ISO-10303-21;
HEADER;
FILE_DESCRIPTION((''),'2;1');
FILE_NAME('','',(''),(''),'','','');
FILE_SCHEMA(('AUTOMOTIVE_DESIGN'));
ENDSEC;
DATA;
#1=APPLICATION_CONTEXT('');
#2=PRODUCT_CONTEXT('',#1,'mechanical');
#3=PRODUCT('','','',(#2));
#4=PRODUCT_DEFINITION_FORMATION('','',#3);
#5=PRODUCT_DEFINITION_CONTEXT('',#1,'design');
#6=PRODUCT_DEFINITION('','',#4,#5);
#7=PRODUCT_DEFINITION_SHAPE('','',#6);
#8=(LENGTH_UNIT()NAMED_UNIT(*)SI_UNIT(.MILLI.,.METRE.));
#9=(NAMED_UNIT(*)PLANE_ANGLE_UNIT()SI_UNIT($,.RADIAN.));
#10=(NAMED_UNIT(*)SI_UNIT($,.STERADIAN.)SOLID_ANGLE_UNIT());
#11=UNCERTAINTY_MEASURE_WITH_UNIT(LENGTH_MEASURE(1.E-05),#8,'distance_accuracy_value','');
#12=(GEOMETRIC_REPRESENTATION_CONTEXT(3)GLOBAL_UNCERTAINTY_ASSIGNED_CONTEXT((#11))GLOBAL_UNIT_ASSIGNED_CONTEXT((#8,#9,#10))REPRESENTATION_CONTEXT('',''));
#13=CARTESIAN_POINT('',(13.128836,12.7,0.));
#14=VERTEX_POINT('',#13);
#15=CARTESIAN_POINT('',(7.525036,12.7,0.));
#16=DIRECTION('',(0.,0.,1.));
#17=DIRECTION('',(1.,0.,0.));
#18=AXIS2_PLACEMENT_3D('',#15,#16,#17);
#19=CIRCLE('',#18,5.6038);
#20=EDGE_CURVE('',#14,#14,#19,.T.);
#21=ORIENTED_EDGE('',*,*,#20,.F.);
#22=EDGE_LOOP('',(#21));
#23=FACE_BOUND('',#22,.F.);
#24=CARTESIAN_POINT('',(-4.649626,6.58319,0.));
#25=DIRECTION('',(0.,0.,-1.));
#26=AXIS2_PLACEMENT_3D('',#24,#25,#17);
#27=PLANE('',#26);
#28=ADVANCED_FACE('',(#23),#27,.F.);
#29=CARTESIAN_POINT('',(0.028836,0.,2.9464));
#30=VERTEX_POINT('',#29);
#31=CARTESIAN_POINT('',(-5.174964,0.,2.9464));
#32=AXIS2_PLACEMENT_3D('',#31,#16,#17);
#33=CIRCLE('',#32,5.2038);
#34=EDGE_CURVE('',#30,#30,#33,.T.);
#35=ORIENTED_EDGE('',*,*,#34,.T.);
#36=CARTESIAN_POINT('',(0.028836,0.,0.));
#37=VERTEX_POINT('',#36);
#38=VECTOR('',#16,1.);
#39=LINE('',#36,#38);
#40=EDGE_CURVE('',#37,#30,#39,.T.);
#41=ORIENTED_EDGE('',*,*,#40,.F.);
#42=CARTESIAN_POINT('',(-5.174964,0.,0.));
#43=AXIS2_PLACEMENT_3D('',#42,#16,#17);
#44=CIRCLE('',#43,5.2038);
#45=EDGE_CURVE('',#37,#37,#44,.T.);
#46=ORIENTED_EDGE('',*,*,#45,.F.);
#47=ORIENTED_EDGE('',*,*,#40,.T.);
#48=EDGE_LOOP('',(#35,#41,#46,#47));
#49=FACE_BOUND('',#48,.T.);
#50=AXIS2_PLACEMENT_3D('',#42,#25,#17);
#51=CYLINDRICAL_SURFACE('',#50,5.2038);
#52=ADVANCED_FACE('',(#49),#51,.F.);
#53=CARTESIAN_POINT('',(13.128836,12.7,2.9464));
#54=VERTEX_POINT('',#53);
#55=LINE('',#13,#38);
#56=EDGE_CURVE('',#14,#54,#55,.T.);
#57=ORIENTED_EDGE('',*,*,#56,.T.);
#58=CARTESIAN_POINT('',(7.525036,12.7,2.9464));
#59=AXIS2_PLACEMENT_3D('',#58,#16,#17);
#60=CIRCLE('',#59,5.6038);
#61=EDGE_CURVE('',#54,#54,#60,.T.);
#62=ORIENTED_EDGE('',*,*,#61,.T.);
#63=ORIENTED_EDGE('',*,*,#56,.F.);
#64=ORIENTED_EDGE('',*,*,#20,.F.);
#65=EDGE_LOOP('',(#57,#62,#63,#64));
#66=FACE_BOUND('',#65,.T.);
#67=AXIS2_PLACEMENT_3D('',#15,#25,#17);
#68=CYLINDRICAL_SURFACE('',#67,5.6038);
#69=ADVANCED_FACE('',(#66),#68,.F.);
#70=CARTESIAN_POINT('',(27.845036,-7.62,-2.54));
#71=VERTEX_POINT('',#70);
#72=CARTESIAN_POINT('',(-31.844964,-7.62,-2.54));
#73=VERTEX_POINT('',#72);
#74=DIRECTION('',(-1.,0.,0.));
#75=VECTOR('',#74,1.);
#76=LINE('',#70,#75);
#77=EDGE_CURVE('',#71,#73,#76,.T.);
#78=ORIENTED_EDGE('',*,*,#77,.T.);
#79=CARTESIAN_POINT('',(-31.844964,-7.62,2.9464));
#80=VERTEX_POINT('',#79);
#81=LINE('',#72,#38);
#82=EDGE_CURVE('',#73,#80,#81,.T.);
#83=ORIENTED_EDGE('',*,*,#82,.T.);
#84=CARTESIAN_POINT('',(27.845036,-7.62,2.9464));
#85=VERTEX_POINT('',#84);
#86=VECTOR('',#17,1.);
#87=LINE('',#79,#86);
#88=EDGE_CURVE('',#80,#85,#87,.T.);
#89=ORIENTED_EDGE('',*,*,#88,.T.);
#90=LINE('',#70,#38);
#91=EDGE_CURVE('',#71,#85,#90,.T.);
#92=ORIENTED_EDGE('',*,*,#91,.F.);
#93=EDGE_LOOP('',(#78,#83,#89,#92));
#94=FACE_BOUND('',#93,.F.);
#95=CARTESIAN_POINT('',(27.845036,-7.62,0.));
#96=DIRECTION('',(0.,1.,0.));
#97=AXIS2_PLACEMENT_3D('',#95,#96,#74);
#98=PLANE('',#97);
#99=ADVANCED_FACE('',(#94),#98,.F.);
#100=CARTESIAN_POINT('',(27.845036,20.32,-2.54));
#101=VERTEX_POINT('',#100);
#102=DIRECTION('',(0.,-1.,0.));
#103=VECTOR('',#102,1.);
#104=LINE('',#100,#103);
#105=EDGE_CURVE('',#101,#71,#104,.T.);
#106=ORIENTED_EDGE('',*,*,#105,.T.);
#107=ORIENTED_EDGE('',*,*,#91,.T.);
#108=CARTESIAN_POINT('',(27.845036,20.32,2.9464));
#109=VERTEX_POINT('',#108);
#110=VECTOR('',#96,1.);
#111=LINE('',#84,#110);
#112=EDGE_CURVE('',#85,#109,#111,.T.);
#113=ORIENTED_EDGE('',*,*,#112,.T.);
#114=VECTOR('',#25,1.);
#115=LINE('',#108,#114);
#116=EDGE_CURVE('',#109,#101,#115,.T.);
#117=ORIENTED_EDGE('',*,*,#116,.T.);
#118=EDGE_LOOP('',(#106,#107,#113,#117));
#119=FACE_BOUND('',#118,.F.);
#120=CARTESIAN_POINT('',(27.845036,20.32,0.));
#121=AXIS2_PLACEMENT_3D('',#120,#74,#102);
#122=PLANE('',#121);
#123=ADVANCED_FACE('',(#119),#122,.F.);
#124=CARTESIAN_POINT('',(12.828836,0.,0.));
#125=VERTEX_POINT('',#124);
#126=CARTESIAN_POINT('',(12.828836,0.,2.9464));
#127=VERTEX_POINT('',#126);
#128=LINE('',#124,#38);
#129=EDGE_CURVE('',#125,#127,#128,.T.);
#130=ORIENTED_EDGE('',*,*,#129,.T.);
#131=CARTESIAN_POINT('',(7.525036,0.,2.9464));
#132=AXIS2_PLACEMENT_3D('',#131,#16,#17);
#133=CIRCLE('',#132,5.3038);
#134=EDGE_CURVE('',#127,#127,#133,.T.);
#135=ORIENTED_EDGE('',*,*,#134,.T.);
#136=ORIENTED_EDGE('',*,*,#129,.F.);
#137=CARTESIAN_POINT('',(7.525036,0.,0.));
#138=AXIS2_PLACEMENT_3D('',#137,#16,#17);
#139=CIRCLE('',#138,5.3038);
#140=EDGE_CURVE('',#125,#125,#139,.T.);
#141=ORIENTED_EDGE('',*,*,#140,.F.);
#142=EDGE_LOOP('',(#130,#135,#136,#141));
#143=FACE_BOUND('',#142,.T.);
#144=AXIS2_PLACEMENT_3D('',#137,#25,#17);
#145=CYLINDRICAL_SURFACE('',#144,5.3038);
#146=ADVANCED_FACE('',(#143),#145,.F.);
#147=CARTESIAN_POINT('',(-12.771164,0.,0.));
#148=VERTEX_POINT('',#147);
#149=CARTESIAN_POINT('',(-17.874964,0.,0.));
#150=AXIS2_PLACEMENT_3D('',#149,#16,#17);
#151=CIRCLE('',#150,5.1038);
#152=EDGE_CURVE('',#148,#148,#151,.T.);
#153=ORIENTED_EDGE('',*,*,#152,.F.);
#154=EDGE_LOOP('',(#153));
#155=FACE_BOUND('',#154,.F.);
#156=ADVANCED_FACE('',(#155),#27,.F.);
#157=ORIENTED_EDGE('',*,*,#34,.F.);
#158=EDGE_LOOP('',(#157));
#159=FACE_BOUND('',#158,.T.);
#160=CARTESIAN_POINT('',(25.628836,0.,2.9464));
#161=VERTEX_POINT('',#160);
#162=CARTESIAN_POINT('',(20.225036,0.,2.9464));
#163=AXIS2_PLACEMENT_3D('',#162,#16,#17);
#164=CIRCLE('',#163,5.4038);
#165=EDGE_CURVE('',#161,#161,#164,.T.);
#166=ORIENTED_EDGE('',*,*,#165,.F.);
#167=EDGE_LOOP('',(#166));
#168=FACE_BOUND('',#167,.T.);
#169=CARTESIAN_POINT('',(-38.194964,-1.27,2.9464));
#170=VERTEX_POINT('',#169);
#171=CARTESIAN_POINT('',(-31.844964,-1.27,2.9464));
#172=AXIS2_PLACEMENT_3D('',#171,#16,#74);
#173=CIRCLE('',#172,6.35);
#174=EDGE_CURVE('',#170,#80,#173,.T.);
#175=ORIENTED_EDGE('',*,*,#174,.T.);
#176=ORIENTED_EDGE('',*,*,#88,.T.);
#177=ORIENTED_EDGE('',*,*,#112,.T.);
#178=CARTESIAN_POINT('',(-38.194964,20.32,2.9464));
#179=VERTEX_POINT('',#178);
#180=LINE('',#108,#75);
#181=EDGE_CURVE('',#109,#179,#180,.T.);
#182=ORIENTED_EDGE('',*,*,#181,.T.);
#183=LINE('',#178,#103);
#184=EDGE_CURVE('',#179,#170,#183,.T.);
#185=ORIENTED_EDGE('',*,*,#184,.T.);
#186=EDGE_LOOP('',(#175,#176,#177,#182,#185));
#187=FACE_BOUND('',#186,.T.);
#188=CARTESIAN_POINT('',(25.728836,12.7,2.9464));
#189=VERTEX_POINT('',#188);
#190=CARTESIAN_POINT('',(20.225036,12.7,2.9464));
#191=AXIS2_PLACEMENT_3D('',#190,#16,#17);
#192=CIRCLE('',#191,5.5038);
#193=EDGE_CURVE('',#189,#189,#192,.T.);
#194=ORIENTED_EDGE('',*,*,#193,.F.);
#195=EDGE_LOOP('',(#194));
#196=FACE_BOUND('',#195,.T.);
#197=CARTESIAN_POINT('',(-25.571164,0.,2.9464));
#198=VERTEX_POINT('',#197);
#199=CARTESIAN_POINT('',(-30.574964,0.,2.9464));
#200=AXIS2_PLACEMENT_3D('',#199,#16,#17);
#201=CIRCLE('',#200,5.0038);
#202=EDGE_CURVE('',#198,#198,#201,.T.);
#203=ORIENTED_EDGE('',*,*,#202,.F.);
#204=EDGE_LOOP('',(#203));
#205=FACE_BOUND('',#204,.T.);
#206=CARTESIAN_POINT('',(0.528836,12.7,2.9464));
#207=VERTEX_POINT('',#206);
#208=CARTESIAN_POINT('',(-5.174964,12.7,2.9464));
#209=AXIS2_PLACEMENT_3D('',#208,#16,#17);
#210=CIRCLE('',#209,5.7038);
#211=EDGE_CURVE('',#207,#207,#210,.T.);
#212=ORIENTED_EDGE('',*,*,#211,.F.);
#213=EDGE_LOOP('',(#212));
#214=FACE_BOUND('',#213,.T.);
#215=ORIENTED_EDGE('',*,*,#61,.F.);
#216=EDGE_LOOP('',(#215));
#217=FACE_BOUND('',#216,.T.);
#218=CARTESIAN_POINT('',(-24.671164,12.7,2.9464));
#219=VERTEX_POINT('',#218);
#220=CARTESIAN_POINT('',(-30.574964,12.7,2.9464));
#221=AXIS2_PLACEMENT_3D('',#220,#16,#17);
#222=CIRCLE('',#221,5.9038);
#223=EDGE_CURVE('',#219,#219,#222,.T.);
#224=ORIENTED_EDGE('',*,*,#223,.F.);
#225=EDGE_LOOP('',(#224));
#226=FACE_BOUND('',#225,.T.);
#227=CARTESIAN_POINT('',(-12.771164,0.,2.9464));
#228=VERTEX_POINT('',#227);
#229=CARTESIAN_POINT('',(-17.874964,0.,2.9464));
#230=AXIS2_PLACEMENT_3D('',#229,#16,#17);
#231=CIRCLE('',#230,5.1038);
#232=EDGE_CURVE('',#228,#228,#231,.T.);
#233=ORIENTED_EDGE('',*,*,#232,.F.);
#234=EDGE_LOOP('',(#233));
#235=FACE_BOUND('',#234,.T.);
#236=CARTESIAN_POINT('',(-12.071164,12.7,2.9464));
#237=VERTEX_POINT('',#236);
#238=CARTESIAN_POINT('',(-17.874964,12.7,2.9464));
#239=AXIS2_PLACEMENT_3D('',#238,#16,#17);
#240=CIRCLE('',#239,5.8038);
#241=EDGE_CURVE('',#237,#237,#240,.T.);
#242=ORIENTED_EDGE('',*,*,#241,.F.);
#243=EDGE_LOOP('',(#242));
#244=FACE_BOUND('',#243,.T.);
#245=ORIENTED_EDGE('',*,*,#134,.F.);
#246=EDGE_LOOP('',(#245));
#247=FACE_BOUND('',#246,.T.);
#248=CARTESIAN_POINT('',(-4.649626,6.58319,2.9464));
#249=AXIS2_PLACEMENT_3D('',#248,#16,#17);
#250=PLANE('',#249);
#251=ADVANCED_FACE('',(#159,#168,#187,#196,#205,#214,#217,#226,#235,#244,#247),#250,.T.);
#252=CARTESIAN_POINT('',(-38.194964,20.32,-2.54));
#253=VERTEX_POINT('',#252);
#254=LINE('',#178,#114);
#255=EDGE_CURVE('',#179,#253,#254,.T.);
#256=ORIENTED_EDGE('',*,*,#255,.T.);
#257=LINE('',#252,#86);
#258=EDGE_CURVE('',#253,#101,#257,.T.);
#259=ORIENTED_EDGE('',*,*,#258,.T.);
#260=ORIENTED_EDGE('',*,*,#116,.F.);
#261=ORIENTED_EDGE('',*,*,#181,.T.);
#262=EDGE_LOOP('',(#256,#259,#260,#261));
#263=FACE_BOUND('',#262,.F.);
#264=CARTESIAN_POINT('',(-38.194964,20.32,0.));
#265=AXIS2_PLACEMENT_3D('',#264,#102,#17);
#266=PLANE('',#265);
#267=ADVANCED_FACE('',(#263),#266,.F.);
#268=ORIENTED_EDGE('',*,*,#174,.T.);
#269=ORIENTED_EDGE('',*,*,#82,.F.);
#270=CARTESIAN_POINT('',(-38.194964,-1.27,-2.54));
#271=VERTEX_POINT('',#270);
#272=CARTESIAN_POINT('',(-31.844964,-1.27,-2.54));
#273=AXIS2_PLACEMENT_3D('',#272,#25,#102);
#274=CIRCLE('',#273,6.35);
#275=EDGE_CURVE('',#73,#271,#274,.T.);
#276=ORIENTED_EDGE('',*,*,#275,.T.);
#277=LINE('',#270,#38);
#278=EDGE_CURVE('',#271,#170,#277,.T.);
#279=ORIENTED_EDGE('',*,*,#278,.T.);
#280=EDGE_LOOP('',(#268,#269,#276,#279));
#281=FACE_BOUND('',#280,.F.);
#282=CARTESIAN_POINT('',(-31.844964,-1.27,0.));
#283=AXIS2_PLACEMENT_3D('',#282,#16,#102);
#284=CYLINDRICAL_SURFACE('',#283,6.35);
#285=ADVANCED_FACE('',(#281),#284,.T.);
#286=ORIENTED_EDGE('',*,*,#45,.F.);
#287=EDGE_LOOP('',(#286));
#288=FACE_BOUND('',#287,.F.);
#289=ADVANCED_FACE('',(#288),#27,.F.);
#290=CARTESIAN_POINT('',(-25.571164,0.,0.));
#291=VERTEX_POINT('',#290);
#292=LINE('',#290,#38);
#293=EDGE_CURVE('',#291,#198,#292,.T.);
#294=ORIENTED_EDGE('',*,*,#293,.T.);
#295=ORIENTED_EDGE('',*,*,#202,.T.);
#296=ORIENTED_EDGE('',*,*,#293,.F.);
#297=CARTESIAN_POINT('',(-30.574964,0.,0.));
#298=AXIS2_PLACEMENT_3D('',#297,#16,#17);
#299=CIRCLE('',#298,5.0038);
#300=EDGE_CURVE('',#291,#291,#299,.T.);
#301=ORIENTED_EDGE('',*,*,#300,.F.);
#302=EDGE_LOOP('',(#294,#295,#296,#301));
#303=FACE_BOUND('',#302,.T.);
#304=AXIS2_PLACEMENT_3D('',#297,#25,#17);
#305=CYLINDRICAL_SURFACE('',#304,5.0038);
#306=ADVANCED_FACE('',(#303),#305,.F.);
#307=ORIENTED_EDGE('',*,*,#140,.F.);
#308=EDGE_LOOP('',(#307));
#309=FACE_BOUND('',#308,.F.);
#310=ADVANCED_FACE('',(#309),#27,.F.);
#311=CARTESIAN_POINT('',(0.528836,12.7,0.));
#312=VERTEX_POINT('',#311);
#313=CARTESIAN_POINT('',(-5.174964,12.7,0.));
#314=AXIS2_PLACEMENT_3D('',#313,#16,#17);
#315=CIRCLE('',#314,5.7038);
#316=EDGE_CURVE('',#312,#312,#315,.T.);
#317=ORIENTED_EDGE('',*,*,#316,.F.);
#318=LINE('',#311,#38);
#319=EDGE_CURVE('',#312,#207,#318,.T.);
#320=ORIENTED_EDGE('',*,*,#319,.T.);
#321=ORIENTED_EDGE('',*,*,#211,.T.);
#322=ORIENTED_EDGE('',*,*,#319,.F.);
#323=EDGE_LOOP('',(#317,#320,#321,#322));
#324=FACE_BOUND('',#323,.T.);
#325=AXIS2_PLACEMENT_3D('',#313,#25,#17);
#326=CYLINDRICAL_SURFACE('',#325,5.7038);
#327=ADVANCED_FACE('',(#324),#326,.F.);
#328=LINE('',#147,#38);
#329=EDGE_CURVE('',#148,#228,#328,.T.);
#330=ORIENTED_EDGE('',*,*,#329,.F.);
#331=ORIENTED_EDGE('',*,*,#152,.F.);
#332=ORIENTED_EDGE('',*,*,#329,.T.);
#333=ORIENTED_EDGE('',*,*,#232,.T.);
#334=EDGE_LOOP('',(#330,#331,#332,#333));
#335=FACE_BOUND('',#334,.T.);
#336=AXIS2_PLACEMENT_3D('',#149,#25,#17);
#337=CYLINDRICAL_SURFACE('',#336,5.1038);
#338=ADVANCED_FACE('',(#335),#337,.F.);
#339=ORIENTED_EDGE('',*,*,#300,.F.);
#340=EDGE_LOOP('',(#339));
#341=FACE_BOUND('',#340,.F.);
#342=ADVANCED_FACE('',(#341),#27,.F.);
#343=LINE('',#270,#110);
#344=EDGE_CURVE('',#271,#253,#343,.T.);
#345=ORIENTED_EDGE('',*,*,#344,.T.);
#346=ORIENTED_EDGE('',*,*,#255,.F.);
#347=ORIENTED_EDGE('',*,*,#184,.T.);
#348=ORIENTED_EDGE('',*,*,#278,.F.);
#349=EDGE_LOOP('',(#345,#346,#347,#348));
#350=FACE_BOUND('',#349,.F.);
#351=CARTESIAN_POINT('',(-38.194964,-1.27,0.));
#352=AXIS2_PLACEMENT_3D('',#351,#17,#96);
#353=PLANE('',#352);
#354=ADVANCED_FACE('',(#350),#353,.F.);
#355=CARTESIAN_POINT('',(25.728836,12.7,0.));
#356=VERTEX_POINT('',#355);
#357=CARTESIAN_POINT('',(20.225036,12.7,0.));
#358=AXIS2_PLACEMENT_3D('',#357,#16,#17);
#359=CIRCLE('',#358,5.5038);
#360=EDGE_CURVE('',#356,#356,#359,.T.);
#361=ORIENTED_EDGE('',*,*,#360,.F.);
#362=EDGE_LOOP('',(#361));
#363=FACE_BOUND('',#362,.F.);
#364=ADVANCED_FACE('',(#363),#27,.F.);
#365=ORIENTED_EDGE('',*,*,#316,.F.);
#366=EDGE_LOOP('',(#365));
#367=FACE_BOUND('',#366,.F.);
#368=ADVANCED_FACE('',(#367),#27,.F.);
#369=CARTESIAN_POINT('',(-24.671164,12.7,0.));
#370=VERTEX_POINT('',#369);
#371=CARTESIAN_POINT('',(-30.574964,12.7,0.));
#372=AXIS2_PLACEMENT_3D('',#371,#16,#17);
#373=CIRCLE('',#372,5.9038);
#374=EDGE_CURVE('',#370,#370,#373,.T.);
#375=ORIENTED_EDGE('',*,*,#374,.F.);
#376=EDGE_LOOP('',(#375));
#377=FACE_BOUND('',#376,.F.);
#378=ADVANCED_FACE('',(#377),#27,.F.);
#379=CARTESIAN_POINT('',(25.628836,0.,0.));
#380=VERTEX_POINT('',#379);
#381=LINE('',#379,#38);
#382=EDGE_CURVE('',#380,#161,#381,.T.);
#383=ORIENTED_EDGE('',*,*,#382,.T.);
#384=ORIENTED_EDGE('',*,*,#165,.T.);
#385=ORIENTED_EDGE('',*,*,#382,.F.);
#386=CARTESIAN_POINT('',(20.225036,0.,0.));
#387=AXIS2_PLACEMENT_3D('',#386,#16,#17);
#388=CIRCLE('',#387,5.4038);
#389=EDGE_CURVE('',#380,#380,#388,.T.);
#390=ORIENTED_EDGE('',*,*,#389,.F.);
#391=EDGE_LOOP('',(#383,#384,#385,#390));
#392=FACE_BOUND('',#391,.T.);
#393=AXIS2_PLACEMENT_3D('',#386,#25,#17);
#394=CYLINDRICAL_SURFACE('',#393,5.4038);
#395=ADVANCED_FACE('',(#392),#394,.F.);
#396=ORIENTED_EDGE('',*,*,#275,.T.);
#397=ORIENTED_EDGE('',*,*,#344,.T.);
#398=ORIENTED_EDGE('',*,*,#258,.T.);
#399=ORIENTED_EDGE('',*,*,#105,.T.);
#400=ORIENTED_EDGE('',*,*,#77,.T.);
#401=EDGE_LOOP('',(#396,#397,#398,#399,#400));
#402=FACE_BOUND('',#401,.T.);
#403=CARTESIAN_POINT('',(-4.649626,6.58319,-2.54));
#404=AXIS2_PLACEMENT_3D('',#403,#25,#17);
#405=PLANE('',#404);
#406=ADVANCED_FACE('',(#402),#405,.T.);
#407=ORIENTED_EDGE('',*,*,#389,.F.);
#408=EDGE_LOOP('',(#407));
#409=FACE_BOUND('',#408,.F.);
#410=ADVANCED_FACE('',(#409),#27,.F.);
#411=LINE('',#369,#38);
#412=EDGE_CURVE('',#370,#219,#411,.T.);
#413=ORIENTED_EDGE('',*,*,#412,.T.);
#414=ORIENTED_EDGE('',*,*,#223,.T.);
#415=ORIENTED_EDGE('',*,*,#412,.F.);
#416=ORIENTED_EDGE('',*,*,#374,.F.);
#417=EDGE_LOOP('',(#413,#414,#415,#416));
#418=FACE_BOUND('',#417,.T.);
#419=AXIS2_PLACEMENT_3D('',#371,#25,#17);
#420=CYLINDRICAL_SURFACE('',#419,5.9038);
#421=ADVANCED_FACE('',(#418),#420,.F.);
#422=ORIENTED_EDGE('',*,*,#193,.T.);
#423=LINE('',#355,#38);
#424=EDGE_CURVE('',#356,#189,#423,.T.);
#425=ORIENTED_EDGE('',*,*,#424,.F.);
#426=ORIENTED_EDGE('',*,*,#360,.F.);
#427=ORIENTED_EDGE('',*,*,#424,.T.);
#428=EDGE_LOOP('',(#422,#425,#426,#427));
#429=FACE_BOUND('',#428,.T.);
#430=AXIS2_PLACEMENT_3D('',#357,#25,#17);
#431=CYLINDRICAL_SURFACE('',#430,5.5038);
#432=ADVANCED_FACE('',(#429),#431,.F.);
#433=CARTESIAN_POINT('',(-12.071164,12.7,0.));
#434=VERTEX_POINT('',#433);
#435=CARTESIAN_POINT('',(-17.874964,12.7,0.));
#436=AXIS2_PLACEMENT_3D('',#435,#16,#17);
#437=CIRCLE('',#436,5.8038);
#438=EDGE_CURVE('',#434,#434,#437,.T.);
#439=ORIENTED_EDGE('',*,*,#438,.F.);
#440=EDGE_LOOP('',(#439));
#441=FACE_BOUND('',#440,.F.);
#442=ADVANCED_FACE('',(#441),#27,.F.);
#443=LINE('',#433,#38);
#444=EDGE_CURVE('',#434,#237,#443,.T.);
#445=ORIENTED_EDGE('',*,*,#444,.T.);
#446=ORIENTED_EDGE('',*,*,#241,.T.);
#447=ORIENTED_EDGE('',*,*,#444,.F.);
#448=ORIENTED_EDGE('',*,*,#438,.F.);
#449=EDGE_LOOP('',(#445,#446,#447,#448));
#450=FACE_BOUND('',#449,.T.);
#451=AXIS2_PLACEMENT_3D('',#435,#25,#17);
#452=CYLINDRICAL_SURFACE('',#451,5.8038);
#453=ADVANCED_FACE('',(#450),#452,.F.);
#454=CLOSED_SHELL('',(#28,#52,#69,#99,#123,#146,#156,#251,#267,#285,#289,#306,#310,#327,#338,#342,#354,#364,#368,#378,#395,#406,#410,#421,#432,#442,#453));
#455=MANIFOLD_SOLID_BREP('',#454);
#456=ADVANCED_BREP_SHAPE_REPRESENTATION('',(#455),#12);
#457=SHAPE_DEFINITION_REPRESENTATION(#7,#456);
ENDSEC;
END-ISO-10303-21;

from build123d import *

# Parameters (mm, degrees)
F0_R     = 5.0038
F0_R_2   = 5.1038
F0_R_3   = 5.2038
F0_R_4   = 5.3038
F0_R_5   = 5.4038
F0_R_6   = 5.9038
F0_R_7   = 5.8038
F0_R_8   = 5.7038
F0_R_9   = 5.6038
F0_R_10  = 5.5038
F1_DEPTH = 2.9464
F2_R     = 5.9038
F2_R_2   = 5.8038
F2_R_3   = 5.7038
F2_R_4   = 5.6038
F2_R_5   = 5.5038
F2_R_6   = 5.0038
F2_R_7   = 5.1038
F2_R_8   = 5.2038
F2_R_9   = 5.3038
F2_R_10  = 5.4038
F3_DEPTH = 2.54


with BuildPart() as f1:
    # F0 (on Top) → F1 (new body)
    with BuildSketch(Plane.XY):
        with BuildLine():
            Line((27.8450359044, 20.32), (-38.1949640956, 20.32))
            Line((-38.1949640956, 20.32), (-38.1949640956, -1.27))
            ThreePointArc((-38.1949640956, -1.27), (-36.3350921561, -5.7601280605), (-31.8449640956, -7.62))
            Line((-31.8449640956, -7.62), (27.8450359044, -7.62))
            Line((27.8450359044, -7.62), (27.8450359044, 20.32))
        make_face()
        with Locations((-30.5749640956, 0)):
            Circle(F0_R, mode=Mode.SUBTRACT)
        with Locations((-17.8749640956, 0)):
            Circle(F0_R_2, mode=Mode.SUBTRACT)
        with Locations((-5.1749640956, 0)):
            Circle(F0_R_3, mode=Mode.SUBTRACT)
        with Locations((7.5250359044, 0)):
            Circle(F0_R_4, mode=Mode.SUBTRACT)
        with Locations((20.2250359044, 0)):
            Circle(F0_R_5, mode=Mode.SUBTRACT)
        with Locations((-30.5749640956, 12.7)):
            Circle(F0_R_6, mode=Mode.SUBTRACT)
        with Locations((-17.8749640956, 12.7)):
            Circle(F0_R_7, mode=Mode.SUBTRACT)
        with Locations((-5.1749640956, 12.7)):
            Circle(F0_R_8, mode=Mode.SUBTRACT)
        with Locations((7.5250359044, 12.7)):
            Circle(F0_R_9, mode=Mode.SUBTRACT)
        with Locations((20.2250359044, 12.7)):
            Circle(F0_R_10, mode=Mode.SUBTRACT)
    extrude(amount=F1_DEPTH)

    # F2 (on face) → F3 (join)
    with BuildSketch(Plane(origin=(0, 0, 0), x_dir=(1, 0, 0), z_dir=(0, 0, -1))):
        with BuildLine():
            Line((-38.1949640956, 1.27), (-38.1949640956, -20.32))
            Line((-38.1949640956, -20.32), (27.8450359044, -20.32))
            Line((27.8450359044, -20.32), (27.8450359044, 7.62))
            Line((27.8450359044, 7.62), (-31.8449640956, 7.62))
            ThreePointArc((-31.8449640956, 7.62), (-36.3350921561, 5.7601280605), (-38.1949640956, 1.27))
        make_face()
        with Locations((-30.5749640956, -12.7)):
            Circle(F2_R, mode=Mode.SUBTRACT)
        with Locations((-17.8749640956, -12.7)):
            Circle(F2_R_2, mode=Mode.SUBTRACT)
        with Locations((-5.1749640956, -12.7)):
            Circle(F2_R_3, mode=Mode.SUBTRACT)
        with Locations((7.5250359044, -12.7)):
            Circle(F2_R_4, mode=Mode.SUBTRACT)
        with Locations((20.2250359044, -12.7)):
            Circle(F2_R_5, mode=Mode.SUBTRACT)
        with Locations((-30.5749640956, 0)):
            Circle(F2_R_6, mode=Mode.SUBTRACT)
        with Locations((-17.8749640956, 0)):
            Circle(F2_R_7, mode=Mode.SUBTRACT)
        with Locations((-5.1749640956, 0)):
            Circle(F2_R_8, mode=Mode.SUBTRACT)
        with Locations((7.5250359044, 0)):
            Circle(F2_R_9, mode=Mode.SUBTRACT)
        with Locations((20.2250359044, 0)):
            Circle(F2_R_10, mode=Mode.SUBTRACT)
        with Locations((-30.5749640956, 0)):
            Circle(F2_R_6)
        with Locations((-30.5749640956, -12.7)):
            Circle(F2_R)
        with Locations((-17.8749640956, -12.7)):
            Circle(F2_R_2)
        with Locations((-17.8749640956, 0)):
            Circle(F2_R_7)
        with Locations((-5.1749640956, 0)):
            Circle(F2_R_8)
        with Locations((-5.1749640956, -12.7)):
            Circle(F2_R_3)
        with Locations((7.5250359044, -12.7)):
            Circle(F2_R_4)
        with Locations((7.5250359044, 0)):
            Circle(F2_R_9)
        with Locations((20.2250359044, 0)):
            Circle(F2_R_10)
        with Locations((20.2250359044, -12.7)):
            Circle(F2_R_5)
    extrude(amount=F3_DEPTH)


solid = f1.part
